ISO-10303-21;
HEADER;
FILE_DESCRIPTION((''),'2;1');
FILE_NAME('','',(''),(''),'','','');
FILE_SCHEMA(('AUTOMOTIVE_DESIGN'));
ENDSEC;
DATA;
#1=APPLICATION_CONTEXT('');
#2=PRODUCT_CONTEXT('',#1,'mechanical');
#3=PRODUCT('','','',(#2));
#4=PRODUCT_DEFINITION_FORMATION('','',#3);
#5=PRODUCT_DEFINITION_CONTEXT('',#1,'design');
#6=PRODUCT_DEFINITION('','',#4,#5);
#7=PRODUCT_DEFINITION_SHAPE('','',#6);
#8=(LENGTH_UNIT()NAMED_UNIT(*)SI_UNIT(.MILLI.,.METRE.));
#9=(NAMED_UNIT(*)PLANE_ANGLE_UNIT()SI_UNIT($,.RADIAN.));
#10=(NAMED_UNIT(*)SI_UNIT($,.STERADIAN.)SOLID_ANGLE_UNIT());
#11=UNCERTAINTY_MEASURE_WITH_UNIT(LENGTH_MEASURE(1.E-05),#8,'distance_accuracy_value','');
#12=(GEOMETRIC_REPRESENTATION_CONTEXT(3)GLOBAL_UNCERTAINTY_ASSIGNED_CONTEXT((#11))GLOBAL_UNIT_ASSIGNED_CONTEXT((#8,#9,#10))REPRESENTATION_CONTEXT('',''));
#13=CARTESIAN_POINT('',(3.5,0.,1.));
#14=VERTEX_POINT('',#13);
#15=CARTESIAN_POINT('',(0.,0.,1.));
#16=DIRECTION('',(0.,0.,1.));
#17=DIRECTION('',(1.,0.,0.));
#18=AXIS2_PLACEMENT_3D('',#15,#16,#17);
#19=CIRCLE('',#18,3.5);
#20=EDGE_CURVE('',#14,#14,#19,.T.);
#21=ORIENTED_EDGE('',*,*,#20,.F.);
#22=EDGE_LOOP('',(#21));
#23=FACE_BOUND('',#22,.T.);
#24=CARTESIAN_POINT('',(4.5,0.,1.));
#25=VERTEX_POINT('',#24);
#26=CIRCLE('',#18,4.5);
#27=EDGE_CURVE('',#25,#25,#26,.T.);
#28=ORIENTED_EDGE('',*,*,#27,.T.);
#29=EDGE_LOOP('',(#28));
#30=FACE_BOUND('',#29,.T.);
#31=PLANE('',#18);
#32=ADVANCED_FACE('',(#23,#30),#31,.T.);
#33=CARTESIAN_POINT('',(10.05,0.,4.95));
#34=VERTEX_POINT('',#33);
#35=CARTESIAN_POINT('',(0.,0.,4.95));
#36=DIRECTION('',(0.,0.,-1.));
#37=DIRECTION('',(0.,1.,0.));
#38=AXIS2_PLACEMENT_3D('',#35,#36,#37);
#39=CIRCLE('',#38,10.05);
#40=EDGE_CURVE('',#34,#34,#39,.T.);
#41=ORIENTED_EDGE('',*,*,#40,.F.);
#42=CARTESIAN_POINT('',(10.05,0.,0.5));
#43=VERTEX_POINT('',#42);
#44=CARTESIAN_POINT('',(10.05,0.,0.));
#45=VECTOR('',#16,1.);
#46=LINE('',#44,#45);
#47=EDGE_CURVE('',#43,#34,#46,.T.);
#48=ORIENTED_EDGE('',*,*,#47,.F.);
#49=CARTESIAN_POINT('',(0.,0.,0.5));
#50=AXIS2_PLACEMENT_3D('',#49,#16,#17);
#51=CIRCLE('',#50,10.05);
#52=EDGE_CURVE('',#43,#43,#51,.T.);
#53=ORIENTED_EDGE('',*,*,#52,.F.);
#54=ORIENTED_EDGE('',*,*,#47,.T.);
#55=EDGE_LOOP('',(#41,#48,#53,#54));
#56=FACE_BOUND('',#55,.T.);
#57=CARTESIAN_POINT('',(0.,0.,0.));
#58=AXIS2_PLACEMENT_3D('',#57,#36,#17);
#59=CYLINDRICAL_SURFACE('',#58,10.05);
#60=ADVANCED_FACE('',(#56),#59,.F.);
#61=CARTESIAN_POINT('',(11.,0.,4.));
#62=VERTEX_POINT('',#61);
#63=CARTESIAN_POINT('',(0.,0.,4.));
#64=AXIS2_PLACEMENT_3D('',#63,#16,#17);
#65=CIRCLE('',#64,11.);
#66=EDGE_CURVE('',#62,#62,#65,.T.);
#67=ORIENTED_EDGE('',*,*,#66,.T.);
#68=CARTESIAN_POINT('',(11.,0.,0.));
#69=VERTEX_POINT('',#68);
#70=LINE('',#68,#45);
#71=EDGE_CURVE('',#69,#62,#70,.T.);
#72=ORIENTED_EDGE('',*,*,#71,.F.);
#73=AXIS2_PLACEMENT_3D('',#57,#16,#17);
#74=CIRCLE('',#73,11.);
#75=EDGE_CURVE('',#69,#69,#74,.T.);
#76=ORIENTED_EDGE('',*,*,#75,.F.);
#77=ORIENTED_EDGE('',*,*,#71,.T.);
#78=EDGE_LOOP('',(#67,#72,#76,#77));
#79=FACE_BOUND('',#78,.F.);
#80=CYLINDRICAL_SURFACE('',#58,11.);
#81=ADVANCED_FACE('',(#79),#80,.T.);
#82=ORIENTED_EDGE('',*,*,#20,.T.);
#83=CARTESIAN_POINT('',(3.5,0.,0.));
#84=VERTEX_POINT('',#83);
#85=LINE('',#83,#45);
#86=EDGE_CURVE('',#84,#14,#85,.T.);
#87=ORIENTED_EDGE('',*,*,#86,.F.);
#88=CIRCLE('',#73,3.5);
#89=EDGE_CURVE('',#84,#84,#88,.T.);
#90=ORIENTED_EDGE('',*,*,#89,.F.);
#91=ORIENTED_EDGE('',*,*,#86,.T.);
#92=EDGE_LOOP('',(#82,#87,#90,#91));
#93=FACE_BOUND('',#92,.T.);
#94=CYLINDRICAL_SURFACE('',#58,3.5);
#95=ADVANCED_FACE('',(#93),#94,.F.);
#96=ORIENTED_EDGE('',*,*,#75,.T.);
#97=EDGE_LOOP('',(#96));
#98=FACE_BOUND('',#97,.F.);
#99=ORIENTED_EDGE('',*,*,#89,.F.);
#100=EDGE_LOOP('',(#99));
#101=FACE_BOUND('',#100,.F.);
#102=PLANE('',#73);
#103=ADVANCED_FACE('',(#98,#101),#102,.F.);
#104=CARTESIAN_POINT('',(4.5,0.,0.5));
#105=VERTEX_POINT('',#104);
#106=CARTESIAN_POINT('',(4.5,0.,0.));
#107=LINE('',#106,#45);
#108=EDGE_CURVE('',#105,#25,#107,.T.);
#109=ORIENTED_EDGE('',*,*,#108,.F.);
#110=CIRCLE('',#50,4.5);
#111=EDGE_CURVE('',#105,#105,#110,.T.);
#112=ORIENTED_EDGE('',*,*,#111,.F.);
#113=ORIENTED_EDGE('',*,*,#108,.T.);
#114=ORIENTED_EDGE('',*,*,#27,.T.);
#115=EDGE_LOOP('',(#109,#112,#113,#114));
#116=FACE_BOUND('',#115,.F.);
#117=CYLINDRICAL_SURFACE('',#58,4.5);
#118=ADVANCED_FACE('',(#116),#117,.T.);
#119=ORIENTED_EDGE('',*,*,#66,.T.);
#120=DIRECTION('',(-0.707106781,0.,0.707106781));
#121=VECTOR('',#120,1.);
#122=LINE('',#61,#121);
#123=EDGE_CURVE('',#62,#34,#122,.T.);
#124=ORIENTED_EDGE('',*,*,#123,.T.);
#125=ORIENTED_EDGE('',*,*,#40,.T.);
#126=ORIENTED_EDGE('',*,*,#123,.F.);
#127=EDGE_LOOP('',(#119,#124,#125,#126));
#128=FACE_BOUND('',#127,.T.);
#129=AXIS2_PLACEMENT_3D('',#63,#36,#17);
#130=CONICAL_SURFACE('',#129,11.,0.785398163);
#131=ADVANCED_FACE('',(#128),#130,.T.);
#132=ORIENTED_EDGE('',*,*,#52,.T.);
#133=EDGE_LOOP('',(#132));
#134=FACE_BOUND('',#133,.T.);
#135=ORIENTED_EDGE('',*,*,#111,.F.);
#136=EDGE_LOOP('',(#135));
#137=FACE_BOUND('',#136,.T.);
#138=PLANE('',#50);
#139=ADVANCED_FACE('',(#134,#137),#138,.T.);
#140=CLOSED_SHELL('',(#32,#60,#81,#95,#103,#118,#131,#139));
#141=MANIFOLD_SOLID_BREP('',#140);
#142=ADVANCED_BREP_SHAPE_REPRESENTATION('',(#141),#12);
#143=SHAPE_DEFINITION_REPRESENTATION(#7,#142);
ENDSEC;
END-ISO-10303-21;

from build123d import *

# Parameters (mm, degrees)
F0_R     = 11
F0_R_2   = 10.5
F0_R_3   = 10.05
F1_DEPTH = 5
F0_R_4   = 4.5
F6_DEPTH = 0.5
F0_R_5   = 3.5
F7_DEPTH = 1


# Not quite as in the source:
# - a fillet or chamfer that OpenCascade refuses, or shapes differently, is made with other operations: its cross-section is extruded or revolved along the edge and cut away or added


with BuildPart() as f1:
    # F0 (on Top) → F1 (new body)
    with BuildSketch(Plane.XY):
        Circle(F0_R)
        Circle(F0_R_2, mode=Mode.SUBTRACT)
        Circle(F0_R_2)
        Circle(F0_R_3, mode=Mode.SUBTRACT)
    extrude(amount=F1_DEPTH)

    # F5: chamfer of 1 on 1 edges, made by hand

    # F5_s1 → F5_t2 (revolve, cut)
    with BuildSketch(Plane.XZ):
        Polygon((11, 4), (10, 5), (11, 5), align=None)
    revolve(axis=Axis((0, 0, 5), (0, 0, 1)), mode=Mode.SUBTRACT)

    # F0 (on Top) → F6 (join)
    with BuildSketch(Plane.XY):
        Circle(F0_R_3)
        Circle(F0_R_4, mode=Mode.SUBTRACT)
    extrude(amount=F6_DEPTH)

    # F0 (on Top) → F7 (join)
    with BuildSketch(Plane.XY):
        Circle(F0_R_4)
        Circle(F0_R_5, mode=Mode.SUBTRACT)
    extrude(amount=F7_DEPTH)


solid = f1.part
